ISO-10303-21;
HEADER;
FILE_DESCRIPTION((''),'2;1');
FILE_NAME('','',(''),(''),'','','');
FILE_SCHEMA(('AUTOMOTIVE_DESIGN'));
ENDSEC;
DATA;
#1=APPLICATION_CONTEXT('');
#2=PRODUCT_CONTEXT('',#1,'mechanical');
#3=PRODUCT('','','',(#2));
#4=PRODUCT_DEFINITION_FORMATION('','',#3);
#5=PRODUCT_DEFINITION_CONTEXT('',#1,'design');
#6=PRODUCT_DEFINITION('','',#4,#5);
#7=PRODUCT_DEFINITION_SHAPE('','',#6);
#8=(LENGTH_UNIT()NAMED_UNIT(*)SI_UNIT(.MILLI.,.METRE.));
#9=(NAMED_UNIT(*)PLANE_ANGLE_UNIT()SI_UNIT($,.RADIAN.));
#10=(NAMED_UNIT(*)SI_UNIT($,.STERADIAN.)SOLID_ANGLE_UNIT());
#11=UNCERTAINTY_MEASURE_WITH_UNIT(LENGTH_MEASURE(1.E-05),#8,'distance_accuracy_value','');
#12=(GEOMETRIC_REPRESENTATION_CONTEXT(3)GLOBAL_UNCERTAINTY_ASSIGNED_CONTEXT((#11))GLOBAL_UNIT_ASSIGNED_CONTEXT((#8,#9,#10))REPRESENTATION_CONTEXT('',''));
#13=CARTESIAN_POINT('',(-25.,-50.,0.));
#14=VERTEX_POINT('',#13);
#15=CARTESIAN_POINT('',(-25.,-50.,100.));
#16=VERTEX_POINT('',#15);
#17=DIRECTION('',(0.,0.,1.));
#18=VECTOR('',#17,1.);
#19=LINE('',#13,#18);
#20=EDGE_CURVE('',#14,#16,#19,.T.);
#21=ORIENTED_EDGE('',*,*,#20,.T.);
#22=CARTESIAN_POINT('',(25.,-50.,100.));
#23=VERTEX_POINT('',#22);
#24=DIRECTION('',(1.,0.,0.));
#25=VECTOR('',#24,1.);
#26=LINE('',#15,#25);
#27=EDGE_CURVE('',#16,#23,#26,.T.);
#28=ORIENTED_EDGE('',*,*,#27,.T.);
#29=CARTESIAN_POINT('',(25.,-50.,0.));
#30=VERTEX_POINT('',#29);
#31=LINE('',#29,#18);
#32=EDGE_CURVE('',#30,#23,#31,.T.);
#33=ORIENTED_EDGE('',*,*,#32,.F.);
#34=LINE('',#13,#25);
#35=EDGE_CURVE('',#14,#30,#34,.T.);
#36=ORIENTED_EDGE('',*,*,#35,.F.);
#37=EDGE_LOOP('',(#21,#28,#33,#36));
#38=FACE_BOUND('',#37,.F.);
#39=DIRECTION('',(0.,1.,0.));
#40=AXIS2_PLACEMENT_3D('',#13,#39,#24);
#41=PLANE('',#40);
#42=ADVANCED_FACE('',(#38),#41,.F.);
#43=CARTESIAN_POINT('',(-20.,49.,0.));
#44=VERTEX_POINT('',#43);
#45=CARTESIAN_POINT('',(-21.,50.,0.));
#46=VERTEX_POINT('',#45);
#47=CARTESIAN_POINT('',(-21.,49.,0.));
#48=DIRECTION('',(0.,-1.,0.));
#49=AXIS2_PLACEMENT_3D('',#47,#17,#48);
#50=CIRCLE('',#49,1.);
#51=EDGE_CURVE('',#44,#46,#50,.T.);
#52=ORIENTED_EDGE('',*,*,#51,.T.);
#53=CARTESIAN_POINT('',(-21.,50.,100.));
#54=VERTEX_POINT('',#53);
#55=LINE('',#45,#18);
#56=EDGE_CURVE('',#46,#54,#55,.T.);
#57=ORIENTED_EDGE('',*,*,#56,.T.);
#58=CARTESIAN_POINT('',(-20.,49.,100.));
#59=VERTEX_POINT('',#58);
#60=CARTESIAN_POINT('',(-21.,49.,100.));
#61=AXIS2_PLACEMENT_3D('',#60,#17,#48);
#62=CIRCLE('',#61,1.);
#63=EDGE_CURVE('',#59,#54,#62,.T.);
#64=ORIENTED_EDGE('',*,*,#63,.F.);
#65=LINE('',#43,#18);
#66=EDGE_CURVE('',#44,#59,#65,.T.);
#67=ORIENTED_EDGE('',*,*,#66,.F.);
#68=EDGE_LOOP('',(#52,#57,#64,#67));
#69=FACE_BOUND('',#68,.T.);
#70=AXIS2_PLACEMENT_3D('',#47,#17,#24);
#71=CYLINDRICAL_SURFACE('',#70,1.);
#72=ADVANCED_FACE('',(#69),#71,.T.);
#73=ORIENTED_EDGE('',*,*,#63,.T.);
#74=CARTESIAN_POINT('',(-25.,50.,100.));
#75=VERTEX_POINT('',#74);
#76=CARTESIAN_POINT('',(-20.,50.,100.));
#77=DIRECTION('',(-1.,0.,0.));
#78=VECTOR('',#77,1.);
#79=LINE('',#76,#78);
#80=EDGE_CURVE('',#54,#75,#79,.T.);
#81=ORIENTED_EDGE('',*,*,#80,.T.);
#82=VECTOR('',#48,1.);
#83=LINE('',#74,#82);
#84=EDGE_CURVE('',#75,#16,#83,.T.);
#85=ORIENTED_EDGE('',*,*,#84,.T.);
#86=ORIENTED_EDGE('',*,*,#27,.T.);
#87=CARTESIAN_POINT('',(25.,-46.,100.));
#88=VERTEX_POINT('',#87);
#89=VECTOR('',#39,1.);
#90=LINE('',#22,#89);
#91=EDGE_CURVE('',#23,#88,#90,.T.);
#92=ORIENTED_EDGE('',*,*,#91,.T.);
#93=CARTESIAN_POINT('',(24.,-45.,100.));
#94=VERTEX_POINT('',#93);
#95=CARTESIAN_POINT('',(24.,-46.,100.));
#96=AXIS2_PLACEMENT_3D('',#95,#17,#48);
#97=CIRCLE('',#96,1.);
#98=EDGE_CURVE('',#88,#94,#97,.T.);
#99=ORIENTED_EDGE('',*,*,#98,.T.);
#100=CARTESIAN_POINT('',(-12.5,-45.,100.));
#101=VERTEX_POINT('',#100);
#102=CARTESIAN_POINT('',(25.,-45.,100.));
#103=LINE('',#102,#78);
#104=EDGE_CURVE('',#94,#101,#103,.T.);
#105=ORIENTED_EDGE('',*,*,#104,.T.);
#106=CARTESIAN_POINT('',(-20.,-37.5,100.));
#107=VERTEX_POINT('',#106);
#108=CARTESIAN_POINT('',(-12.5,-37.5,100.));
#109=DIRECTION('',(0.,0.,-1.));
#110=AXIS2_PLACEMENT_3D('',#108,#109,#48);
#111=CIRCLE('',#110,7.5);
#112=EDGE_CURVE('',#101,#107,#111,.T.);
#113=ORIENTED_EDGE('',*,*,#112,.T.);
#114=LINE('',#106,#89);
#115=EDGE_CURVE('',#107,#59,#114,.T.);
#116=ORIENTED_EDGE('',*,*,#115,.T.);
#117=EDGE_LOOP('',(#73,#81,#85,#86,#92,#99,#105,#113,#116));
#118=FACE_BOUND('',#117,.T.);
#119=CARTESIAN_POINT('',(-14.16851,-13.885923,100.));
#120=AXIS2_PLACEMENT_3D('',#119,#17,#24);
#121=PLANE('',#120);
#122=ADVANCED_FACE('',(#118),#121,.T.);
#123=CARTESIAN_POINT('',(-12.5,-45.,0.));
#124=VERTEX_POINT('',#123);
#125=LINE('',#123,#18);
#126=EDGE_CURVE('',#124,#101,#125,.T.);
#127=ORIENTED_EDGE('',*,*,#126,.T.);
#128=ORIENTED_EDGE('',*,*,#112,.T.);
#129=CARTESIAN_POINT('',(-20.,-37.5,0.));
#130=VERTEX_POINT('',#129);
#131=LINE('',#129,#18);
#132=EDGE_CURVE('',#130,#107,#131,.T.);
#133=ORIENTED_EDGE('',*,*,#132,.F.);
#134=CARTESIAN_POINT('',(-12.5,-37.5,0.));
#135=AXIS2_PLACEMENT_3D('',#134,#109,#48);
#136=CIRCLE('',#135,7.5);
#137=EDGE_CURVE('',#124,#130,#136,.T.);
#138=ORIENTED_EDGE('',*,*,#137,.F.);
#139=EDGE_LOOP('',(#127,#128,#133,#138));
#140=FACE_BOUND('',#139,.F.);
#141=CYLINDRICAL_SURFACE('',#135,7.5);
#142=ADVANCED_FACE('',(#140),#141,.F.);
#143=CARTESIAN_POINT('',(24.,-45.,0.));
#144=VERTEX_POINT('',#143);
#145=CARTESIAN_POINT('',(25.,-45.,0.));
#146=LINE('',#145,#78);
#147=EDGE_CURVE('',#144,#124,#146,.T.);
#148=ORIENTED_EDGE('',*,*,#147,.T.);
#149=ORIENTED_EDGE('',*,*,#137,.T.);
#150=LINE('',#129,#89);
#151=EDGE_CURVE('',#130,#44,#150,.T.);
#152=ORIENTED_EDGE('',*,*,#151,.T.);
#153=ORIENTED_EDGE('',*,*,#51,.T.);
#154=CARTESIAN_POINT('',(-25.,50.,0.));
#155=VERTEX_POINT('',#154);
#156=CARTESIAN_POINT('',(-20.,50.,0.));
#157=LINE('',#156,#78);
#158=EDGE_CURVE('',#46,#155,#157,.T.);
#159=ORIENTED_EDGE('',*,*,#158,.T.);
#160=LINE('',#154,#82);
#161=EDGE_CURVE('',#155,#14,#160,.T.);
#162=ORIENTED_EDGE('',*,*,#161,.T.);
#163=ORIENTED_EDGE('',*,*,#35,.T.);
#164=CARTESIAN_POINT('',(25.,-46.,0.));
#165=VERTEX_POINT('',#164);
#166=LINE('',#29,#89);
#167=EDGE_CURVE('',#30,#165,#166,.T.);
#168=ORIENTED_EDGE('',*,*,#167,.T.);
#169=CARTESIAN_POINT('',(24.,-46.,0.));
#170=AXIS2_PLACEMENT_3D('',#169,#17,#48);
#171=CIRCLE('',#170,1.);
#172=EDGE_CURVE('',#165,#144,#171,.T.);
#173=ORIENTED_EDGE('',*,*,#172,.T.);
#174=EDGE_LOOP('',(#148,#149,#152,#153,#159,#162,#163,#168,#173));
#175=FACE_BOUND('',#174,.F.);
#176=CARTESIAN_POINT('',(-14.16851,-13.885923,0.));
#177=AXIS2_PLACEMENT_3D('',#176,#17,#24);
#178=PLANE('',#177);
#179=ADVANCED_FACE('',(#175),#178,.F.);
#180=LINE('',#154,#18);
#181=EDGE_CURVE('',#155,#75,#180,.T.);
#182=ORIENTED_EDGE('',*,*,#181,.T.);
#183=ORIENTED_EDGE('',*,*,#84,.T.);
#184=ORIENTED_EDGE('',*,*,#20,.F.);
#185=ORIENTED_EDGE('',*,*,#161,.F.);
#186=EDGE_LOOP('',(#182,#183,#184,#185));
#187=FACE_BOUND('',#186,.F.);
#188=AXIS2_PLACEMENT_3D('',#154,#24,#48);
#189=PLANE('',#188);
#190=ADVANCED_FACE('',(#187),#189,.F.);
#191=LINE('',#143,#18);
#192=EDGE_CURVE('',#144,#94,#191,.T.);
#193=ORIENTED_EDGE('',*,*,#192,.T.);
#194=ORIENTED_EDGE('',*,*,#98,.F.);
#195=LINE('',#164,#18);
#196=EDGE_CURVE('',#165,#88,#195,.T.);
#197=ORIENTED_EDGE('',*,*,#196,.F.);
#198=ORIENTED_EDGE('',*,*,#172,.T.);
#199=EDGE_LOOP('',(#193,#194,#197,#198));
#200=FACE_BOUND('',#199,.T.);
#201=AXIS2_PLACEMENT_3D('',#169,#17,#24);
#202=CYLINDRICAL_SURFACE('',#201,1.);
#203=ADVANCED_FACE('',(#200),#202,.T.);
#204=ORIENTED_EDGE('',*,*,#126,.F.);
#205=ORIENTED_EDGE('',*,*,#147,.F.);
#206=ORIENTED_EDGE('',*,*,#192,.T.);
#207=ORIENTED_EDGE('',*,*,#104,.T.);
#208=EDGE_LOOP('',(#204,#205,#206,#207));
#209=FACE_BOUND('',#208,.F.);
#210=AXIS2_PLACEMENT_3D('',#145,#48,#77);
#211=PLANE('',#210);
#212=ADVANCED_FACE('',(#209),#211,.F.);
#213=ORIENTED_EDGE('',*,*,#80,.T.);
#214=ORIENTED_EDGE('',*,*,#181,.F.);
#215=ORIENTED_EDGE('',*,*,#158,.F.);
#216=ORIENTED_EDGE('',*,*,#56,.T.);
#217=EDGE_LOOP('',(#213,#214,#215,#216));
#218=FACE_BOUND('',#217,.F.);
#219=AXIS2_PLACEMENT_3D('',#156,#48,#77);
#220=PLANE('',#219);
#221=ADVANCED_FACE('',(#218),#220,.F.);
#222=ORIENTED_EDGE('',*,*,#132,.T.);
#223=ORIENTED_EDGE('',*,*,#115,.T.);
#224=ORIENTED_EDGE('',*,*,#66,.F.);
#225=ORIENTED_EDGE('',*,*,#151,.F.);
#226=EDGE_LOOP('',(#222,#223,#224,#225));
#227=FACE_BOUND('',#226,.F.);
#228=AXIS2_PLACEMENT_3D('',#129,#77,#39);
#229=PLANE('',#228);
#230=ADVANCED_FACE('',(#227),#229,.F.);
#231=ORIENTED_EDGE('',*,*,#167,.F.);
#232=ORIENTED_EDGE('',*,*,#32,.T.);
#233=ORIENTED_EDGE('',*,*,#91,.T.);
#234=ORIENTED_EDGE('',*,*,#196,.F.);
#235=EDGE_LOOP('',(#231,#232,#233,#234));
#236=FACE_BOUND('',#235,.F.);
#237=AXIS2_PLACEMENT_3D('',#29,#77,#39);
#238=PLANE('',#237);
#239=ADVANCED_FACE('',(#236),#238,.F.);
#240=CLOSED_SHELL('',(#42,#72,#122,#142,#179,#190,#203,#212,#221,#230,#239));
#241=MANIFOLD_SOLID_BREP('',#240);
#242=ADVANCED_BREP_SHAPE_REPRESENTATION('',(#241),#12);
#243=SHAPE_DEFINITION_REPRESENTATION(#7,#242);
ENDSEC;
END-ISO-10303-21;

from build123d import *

# Parameters (mm, degrees)
F1_DEPTH = 100
F2_R     = 1


# Not quite as in the source:
# - a feature names something its author has since deleted; it is built from what else it names


with BuildPart() as f1:
    # F0 (on Top) → F1 (new body)
    with BuildSketch(Plane.XY):
        with BuildLine():
            Line((-25, 50), (-25, -50))
            Line((-25, -50), (25, -50))
            Line((25, -50), (25, -45))
            Line((25, -45), (-12.5, -45))
            ThreePointArc((-12.5, -45), (-17.8033008589, -42.8033008589), (-20, -37.5))
            Line((-20, -37.5), (-20, 50))
            Line((-20, 50), (-25, 50))
        make_face()
    extrude(amount=F1_DEPTH)

    # F2
    f2_edges = [f1.edges().sort_by_distance(p)[0] for p in [
        (-20, 50, 50),
        (25, -45, 50),
    ]]
    fillet(f2_edges, radius=F2_R)


solid = f1.part
